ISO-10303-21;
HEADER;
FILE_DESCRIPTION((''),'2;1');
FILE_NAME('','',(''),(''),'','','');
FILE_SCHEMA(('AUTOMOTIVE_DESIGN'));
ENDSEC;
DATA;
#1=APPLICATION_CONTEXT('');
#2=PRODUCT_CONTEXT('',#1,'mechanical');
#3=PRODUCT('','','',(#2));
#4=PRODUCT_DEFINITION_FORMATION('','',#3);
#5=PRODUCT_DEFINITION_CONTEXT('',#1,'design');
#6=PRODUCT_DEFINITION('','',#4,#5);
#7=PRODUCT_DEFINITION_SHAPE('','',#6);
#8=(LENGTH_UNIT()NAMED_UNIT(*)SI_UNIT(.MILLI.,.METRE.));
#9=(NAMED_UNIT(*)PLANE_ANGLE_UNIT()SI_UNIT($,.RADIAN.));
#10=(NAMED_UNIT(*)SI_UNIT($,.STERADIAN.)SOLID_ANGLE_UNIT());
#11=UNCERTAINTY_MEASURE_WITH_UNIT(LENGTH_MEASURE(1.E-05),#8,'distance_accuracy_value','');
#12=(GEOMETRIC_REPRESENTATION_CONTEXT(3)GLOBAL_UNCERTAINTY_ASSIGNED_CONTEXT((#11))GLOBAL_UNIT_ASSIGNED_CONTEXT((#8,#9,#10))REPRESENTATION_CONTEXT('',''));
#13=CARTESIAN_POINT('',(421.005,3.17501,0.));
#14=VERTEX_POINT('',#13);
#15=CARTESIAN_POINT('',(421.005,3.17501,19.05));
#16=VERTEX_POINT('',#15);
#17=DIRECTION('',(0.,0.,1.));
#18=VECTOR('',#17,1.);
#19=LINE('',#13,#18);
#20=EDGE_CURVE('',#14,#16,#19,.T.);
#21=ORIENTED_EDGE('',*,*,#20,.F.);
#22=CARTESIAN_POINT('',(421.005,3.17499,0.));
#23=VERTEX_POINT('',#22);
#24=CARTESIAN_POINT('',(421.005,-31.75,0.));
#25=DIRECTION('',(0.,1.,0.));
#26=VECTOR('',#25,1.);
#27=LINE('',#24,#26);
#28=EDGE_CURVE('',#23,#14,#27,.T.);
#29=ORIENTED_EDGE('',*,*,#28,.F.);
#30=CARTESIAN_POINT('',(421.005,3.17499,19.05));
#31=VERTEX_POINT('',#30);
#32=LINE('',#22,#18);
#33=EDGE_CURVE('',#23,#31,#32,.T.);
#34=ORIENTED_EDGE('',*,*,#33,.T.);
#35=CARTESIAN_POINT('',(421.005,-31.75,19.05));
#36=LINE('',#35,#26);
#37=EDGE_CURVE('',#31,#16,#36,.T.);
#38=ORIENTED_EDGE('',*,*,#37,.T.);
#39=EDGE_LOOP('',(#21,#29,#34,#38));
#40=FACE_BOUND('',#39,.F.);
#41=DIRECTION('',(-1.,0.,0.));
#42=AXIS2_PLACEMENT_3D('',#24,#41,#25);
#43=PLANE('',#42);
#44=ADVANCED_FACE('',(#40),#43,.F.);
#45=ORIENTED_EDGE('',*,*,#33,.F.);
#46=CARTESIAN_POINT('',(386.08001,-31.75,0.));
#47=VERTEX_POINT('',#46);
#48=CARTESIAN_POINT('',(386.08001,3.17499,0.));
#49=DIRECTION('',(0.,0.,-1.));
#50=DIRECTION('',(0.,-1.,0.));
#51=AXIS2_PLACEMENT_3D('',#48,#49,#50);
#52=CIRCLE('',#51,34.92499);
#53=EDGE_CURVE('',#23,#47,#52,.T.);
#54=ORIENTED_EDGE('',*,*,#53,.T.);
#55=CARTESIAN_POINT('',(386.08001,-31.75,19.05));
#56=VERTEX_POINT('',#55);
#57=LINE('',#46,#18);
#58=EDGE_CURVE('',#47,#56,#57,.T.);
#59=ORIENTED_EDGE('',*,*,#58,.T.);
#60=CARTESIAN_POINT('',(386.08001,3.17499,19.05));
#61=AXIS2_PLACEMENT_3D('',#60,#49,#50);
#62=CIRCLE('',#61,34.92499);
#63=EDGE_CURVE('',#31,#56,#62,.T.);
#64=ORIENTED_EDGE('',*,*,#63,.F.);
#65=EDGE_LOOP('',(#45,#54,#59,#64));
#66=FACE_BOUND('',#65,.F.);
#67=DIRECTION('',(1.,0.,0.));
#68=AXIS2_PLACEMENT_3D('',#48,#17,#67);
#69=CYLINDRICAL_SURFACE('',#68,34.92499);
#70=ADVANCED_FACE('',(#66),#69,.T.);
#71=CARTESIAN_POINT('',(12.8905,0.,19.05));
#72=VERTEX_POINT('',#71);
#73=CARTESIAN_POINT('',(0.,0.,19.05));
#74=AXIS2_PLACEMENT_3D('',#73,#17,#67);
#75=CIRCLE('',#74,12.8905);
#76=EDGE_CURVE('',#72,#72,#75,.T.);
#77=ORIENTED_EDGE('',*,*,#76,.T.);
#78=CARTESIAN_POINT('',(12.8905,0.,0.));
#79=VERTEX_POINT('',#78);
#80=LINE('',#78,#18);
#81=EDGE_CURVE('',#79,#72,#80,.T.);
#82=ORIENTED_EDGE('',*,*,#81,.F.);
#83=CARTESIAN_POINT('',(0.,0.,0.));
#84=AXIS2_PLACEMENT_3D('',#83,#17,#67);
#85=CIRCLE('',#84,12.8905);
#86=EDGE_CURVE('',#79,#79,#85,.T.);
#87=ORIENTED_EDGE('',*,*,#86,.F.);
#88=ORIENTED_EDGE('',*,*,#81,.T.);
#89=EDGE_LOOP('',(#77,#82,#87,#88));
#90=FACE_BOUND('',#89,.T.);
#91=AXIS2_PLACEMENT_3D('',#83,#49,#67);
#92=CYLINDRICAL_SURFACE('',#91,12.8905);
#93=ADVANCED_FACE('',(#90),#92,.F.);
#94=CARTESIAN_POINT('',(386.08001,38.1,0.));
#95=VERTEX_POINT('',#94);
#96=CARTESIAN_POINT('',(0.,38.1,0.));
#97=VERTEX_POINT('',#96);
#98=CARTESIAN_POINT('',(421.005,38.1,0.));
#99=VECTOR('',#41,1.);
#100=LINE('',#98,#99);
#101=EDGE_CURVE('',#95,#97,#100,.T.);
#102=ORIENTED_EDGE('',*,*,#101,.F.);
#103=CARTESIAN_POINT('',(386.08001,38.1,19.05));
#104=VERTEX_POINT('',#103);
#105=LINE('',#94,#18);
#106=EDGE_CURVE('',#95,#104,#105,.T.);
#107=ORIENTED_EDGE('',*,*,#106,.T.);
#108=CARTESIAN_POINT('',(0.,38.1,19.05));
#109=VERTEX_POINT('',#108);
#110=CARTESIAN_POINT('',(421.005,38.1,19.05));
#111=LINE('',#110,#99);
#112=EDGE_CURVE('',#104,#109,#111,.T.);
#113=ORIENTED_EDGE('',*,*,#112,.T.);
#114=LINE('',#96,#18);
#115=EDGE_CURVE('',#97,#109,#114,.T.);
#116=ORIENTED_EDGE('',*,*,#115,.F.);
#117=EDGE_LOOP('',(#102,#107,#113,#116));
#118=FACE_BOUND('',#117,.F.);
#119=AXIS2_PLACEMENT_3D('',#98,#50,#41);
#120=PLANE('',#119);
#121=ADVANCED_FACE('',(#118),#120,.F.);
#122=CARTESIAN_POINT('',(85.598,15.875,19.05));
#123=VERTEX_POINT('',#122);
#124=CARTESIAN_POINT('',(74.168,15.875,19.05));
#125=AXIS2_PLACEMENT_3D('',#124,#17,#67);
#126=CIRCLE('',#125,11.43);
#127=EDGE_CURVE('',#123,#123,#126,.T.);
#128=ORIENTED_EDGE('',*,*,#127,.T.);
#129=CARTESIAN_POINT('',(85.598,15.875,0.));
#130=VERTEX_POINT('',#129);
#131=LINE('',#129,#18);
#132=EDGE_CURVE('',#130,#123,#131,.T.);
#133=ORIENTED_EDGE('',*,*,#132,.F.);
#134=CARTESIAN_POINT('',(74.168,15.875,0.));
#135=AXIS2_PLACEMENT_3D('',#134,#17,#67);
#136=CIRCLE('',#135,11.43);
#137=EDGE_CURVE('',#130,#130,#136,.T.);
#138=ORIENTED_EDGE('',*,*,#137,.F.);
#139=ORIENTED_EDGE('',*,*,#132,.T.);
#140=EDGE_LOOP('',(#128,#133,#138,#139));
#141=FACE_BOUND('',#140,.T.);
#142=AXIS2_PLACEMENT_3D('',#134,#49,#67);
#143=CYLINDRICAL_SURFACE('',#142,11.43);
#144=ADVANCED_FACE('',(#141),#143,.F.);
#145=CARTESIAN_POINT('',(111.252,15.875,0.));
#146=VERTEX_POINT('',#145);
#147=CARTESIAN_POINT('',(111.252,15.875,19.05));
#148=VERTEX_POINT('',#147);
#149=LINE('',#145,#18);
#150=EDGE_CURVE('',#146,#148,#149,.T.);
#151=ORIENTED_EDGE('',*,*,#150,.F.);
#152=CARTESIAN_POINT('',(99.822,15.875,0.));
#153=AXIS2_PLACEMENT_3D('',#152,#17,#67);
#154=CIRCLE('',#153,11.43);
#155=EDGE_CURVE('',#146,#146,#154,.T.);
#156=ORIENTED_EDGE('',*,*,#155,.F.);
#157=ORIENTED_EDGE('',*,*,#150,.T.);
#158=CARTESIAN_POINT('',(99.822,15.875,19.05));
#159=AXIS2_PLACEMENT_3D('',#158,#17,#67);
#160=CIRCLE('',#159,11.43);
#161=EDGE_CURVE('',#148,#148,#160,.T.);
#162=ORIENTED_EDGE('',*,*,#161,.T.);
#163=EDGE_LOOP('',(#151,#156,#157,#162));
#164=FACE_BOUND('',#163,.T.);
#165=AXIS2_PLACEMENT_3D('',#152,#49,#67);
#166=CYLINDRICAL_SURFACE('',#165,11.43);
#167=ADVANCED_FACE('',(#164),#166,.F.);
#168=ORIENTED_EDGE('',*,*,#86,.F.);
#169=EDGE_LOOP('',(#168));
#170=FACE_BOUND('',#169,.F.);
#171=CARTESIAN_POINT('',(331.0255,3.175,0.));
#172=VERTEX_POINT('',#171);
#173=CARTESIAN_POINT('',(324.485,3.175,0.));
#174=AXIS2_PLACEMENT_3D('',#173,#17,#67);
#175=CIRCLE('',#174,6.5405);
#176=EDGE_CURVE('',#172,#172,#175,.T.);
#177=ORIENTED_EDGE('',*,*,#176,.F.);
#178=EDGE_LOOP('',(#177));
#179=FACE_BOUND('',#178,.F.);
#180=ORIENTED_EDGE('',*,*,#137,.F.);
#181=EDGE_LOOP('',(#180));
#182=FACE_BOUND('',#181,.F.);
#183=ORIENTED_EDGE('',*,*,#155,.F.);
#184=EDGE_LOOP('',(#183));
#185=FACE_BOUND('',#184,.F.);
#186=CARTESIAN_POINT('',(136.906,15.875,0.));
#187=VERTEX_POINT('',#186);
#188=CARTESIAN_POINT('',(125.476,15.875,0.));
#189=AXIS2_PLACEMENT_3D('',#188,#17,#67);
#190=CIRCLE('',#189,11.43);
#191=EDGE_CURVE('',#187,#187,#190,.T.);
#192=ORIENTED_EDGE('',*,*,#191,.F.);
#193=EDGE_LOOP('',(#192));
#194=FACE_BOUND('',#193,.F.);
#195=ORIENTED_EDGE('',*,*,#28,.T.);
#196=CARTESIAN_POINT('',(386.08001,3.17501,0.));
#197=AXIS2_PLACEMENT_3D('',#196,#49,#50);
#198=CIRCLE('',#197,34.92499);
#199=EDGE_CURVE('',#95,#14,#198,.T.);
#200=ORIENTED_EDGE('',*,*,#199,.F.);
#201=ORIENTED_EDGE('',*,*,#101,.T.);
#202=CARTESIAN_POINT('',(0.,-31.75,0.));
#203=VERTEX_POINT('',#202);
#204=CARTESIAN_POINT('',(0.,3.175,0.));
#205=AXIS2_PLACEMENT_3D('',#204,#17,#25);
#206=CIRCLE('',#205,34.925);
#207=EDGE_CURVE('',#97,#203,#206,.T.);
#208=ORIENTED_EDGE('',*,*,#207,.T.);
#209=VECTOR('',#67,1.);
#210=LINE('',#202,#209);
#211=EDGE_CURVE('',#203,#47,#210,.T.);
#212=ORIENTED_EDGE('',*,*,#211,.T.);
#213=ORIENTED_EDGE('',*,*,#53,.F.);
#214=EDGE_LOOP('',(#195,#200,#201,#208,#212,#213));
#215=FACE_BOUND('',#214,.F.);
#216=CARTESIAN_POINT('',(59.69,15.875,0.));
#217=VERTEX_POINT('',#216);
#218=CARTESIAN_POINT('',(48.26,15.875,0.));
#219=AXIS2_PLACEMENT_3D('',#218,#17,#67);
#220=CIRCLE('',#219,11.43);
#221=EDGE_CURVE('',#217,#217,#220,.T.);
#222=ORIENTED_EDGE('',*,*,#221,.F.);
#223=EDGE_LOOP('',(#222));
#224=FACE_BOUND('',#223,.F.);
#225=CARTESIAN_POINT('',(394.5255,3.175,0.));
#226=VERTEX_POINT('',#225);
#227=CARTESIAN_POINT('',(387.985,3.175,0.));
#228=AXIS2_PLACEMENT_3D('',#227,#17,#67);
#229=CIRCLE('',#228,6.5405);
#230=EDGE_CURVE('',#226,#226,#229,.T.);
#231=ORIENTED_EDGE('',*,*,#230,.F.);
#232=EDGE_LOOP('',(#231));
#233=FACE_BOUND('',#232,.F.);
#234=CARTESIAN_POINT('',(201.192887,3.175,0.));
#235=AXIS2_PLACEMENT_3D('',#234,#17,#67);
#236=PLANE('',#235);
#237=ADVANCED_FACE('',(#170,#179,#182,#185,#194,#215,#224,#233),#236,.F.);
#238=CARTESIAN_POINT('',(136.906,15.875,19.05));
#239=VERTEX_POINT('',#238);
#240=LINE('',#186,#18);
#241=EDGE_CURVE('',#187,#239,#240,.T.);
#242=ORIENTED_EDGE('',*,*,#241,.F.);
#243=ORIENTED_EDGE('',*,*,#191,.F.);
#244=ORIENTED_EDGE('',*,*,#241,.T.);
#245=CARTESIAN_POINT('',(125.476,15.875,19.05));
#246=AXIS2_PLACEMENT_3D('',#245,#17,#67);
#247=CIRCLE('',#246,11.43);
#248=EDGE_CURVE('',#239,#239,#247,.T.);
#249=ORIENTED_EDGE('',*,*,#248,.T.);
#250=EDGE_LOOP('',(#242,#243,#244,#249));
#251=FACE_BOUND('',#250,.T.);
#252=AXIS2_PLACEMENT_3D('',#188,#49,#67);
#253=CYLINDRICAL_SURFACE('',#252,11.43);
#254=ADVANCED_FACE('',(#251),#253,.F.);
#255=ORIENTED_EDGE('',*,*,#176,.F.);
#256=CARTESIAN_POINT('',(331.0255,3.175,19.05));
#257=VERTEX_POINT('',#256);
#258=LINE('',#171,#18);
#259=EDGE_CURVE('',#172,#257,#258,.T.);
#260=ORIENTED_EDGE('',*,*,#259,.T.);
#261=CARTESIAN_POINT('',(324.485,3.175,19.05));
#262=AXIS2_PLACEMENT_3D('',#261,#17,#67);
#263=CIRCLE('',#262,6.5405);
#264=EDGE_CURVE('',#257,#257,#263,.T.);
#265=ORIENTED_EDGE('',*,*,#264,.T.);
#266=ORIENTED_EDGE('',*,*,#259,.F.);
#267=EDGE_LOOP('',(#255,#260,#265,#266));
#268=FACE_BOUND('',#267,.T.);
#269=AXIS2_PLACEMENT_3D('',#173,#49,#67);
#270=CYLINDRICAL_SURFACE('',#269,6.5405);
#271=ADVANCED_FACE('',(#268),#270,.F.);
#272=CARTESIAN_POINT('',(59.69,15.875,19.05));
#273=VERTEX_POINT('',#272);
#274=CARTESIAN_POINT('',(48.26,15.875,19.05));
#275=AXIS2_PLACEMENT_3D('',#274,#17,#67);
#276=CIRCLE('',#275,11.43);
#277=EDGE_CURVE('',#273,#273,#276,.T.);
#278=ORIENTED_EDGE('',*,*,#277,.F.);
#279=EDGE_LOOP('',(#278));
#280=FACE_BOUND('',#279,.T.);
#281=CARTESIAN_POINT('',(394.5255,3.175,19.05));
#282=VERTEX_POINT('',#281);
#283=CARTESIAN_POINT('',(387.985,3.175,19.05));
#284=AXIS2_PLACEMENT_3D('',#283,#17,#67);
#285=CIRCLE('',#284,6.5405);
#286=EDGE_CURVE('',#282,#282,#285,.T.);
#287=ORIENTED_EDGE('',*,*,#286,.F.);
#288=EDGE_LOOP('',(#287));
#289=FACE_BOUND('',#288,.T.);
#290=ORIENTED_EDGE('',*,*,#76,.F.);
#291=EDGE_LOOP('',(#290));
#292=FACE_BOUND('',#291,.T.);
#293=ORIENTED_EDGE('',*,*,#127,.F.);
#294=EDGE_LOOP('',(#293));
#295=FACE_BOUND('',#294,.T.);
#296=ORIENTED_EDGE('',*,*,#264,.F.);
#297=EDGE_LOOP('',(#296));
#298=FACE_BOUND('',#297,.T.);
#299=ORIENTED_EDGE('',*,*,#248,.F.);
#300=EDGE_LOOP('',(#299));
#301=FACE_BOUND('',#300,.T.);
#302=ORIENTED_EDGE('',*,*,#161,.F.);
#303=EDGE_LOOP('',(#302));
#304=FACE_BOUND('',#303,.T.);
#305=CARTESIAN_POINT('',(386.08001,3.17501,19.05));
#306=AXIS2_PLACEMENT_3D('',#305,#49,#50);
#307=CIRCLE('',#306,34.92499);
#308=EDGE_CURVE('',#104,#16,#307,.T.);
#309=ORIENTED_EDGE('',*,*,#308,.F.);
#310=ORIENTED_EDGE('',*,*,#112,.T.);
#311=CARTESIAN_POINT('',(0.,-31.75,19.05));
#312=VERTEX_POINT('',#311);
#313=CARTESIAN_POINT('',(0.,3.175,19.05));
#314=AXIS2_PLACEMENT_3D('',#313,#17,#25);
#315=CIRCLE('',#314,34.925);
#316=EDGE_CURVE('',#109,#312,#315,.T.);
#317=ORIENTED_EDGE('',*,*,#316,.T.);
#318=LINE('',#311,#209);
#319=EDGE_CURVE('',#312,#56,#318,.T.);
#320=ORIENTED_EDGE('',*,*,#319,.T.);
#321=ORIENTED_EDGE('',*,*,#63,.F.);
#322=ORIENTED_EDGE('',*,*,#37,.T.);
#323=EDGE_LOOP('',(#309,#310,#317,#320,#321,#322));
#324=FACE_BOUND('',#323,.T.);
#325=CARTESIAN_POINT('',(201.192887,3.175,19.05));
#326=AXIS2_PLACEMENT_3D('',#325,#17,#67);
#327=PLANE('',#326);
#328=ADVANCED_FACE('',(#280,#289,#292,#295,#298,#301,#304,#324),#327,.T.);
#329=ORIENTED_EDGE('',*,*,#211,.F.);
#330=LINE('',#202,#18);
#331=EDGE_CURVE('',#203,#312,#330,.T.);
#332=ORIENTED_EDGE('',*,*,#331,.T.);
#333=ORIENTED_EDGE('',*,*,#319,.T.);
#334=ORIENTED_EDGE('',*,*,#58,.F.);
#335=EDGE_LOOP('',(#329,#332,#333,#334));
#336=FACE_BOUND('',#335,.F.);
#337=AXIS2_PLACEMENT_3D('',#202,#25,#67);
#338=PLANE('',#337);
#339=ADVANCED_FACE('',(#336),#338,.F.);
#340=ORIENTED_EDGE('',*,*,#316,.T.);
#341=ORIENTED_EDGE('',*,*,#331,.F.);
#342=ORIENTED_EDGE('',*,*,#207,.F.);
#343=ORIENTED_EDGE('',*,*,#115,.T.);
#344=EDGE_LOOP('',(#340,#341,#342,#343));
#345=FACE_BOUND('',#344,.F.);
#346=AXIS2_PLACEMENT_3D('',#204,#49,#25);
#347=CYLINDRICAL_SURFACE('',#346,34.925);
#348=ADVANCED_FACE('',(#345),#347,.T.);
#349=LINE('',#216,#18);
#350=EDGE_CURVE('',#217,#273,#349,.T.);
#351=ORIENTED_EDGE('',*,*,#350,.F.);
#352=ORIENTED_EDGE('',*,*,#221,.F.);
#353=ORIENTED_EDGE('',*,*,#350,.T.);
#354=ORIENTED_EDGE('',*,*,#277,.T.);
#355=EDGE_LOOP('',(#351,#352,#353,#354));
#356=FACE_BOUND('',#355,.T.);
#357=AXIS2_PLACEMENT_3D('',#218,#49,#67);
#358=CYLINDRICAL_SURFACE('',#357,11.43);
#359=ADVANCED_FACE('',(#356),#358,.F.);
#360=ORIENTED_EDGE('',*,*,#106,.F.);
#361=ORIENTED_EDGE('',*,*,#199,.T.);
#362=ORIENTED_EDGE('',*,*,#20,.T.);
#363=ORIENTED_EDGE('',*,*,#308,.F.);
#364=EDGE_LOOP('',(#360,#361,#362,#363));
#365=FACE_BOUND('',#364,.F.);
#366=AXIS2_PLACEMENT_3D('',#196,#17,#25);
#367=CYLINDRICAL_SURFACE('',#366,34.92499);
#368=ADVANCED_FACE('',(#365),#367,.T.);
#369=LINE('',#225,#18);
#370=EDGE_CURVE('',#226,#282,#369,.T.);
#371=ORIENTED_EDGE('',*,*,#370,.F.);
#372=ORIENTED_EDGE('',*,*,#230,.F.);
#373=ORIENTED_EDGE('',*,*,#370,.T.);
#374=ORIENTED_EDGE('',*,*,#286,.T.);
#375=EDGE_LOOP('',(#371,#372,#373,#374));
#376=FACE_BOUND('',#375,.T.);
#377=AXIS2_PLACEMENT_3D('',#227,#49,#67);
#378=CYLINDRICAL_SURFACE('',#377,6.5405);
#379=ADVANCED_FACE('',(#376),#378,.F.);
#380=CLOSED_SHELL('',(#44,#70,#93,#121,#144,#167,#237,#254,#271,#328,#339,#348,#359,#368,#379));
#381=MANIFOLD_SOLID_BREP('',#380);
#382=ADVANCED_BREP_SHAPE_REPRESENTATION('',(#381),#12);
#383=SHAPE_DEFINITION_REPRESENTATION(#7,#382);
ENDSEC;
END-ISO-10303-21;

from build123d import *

# Parameters (mm, degrees)
F0_R     = 12.8905
F0_R_2   = 11.43
F0_R_3   = 6.5405
F1_DEPTH = 19.05
F2_R     = 34.92499


# Not quite as in the source:
# - a fillet or chamfer is up to 0.001 mm smaller than in the source, because OpenCascade refuses the exact size


with BuildPart() as f1:
    # F0 (on Top) → F1 (new body)
    with BuildSketch(Plane.XY):
        with BuildLine():
            Line((421.005, 38.1), (0, 38.1))
            ThreePointArc((0, 38.1), (-34.925, 3.175), (0, -31.75))
            Line((0, -31.75), (421.005, -31.75))
            Line((421.005, -31.75), (421.005, 38.1))
        make_face()
        Circle(F0_R, mode=Mode.SUBTRACT)
        with Locations((48.26, 15.875)):
            Circle(F0_R_2, mode=Mode.SUBTRACT)
        with Locations((74.168, 15.875)):
            Circle(F0_R_2, mode=Mode.SUBTRACT)
        with Locations((99.822, 15.875)):
            Circle(F0_R_2, mode=Mode.SUBTRACT)
        with Locations((125.476, 15.875)):
            Circle(F0_R_2, mode=Mode.SUBTRACT)
        with Locations((324.485, 3.175)):
            Circle(F0_R_3, mode=Mode.SUBTRACT)
        with Locations((387.985, 3.175)):
            Circle(F0_R_3, mode=Mode.SUBTRACT)
    extrude(amount=F1_DEPTH)

    # F2 (radius 34.925 in the source; OpenCascade refuses exactly that, so slightly less here)
    f2_edges = [f1.edges().sort_by_distance(p)[0] for p in [
        (421.005, 38.1, 9.525),
        (421.005, -31.75, 9.525),
    ]]
    fillet(f2_edges, radius=F2_R)


solid = f1.part
